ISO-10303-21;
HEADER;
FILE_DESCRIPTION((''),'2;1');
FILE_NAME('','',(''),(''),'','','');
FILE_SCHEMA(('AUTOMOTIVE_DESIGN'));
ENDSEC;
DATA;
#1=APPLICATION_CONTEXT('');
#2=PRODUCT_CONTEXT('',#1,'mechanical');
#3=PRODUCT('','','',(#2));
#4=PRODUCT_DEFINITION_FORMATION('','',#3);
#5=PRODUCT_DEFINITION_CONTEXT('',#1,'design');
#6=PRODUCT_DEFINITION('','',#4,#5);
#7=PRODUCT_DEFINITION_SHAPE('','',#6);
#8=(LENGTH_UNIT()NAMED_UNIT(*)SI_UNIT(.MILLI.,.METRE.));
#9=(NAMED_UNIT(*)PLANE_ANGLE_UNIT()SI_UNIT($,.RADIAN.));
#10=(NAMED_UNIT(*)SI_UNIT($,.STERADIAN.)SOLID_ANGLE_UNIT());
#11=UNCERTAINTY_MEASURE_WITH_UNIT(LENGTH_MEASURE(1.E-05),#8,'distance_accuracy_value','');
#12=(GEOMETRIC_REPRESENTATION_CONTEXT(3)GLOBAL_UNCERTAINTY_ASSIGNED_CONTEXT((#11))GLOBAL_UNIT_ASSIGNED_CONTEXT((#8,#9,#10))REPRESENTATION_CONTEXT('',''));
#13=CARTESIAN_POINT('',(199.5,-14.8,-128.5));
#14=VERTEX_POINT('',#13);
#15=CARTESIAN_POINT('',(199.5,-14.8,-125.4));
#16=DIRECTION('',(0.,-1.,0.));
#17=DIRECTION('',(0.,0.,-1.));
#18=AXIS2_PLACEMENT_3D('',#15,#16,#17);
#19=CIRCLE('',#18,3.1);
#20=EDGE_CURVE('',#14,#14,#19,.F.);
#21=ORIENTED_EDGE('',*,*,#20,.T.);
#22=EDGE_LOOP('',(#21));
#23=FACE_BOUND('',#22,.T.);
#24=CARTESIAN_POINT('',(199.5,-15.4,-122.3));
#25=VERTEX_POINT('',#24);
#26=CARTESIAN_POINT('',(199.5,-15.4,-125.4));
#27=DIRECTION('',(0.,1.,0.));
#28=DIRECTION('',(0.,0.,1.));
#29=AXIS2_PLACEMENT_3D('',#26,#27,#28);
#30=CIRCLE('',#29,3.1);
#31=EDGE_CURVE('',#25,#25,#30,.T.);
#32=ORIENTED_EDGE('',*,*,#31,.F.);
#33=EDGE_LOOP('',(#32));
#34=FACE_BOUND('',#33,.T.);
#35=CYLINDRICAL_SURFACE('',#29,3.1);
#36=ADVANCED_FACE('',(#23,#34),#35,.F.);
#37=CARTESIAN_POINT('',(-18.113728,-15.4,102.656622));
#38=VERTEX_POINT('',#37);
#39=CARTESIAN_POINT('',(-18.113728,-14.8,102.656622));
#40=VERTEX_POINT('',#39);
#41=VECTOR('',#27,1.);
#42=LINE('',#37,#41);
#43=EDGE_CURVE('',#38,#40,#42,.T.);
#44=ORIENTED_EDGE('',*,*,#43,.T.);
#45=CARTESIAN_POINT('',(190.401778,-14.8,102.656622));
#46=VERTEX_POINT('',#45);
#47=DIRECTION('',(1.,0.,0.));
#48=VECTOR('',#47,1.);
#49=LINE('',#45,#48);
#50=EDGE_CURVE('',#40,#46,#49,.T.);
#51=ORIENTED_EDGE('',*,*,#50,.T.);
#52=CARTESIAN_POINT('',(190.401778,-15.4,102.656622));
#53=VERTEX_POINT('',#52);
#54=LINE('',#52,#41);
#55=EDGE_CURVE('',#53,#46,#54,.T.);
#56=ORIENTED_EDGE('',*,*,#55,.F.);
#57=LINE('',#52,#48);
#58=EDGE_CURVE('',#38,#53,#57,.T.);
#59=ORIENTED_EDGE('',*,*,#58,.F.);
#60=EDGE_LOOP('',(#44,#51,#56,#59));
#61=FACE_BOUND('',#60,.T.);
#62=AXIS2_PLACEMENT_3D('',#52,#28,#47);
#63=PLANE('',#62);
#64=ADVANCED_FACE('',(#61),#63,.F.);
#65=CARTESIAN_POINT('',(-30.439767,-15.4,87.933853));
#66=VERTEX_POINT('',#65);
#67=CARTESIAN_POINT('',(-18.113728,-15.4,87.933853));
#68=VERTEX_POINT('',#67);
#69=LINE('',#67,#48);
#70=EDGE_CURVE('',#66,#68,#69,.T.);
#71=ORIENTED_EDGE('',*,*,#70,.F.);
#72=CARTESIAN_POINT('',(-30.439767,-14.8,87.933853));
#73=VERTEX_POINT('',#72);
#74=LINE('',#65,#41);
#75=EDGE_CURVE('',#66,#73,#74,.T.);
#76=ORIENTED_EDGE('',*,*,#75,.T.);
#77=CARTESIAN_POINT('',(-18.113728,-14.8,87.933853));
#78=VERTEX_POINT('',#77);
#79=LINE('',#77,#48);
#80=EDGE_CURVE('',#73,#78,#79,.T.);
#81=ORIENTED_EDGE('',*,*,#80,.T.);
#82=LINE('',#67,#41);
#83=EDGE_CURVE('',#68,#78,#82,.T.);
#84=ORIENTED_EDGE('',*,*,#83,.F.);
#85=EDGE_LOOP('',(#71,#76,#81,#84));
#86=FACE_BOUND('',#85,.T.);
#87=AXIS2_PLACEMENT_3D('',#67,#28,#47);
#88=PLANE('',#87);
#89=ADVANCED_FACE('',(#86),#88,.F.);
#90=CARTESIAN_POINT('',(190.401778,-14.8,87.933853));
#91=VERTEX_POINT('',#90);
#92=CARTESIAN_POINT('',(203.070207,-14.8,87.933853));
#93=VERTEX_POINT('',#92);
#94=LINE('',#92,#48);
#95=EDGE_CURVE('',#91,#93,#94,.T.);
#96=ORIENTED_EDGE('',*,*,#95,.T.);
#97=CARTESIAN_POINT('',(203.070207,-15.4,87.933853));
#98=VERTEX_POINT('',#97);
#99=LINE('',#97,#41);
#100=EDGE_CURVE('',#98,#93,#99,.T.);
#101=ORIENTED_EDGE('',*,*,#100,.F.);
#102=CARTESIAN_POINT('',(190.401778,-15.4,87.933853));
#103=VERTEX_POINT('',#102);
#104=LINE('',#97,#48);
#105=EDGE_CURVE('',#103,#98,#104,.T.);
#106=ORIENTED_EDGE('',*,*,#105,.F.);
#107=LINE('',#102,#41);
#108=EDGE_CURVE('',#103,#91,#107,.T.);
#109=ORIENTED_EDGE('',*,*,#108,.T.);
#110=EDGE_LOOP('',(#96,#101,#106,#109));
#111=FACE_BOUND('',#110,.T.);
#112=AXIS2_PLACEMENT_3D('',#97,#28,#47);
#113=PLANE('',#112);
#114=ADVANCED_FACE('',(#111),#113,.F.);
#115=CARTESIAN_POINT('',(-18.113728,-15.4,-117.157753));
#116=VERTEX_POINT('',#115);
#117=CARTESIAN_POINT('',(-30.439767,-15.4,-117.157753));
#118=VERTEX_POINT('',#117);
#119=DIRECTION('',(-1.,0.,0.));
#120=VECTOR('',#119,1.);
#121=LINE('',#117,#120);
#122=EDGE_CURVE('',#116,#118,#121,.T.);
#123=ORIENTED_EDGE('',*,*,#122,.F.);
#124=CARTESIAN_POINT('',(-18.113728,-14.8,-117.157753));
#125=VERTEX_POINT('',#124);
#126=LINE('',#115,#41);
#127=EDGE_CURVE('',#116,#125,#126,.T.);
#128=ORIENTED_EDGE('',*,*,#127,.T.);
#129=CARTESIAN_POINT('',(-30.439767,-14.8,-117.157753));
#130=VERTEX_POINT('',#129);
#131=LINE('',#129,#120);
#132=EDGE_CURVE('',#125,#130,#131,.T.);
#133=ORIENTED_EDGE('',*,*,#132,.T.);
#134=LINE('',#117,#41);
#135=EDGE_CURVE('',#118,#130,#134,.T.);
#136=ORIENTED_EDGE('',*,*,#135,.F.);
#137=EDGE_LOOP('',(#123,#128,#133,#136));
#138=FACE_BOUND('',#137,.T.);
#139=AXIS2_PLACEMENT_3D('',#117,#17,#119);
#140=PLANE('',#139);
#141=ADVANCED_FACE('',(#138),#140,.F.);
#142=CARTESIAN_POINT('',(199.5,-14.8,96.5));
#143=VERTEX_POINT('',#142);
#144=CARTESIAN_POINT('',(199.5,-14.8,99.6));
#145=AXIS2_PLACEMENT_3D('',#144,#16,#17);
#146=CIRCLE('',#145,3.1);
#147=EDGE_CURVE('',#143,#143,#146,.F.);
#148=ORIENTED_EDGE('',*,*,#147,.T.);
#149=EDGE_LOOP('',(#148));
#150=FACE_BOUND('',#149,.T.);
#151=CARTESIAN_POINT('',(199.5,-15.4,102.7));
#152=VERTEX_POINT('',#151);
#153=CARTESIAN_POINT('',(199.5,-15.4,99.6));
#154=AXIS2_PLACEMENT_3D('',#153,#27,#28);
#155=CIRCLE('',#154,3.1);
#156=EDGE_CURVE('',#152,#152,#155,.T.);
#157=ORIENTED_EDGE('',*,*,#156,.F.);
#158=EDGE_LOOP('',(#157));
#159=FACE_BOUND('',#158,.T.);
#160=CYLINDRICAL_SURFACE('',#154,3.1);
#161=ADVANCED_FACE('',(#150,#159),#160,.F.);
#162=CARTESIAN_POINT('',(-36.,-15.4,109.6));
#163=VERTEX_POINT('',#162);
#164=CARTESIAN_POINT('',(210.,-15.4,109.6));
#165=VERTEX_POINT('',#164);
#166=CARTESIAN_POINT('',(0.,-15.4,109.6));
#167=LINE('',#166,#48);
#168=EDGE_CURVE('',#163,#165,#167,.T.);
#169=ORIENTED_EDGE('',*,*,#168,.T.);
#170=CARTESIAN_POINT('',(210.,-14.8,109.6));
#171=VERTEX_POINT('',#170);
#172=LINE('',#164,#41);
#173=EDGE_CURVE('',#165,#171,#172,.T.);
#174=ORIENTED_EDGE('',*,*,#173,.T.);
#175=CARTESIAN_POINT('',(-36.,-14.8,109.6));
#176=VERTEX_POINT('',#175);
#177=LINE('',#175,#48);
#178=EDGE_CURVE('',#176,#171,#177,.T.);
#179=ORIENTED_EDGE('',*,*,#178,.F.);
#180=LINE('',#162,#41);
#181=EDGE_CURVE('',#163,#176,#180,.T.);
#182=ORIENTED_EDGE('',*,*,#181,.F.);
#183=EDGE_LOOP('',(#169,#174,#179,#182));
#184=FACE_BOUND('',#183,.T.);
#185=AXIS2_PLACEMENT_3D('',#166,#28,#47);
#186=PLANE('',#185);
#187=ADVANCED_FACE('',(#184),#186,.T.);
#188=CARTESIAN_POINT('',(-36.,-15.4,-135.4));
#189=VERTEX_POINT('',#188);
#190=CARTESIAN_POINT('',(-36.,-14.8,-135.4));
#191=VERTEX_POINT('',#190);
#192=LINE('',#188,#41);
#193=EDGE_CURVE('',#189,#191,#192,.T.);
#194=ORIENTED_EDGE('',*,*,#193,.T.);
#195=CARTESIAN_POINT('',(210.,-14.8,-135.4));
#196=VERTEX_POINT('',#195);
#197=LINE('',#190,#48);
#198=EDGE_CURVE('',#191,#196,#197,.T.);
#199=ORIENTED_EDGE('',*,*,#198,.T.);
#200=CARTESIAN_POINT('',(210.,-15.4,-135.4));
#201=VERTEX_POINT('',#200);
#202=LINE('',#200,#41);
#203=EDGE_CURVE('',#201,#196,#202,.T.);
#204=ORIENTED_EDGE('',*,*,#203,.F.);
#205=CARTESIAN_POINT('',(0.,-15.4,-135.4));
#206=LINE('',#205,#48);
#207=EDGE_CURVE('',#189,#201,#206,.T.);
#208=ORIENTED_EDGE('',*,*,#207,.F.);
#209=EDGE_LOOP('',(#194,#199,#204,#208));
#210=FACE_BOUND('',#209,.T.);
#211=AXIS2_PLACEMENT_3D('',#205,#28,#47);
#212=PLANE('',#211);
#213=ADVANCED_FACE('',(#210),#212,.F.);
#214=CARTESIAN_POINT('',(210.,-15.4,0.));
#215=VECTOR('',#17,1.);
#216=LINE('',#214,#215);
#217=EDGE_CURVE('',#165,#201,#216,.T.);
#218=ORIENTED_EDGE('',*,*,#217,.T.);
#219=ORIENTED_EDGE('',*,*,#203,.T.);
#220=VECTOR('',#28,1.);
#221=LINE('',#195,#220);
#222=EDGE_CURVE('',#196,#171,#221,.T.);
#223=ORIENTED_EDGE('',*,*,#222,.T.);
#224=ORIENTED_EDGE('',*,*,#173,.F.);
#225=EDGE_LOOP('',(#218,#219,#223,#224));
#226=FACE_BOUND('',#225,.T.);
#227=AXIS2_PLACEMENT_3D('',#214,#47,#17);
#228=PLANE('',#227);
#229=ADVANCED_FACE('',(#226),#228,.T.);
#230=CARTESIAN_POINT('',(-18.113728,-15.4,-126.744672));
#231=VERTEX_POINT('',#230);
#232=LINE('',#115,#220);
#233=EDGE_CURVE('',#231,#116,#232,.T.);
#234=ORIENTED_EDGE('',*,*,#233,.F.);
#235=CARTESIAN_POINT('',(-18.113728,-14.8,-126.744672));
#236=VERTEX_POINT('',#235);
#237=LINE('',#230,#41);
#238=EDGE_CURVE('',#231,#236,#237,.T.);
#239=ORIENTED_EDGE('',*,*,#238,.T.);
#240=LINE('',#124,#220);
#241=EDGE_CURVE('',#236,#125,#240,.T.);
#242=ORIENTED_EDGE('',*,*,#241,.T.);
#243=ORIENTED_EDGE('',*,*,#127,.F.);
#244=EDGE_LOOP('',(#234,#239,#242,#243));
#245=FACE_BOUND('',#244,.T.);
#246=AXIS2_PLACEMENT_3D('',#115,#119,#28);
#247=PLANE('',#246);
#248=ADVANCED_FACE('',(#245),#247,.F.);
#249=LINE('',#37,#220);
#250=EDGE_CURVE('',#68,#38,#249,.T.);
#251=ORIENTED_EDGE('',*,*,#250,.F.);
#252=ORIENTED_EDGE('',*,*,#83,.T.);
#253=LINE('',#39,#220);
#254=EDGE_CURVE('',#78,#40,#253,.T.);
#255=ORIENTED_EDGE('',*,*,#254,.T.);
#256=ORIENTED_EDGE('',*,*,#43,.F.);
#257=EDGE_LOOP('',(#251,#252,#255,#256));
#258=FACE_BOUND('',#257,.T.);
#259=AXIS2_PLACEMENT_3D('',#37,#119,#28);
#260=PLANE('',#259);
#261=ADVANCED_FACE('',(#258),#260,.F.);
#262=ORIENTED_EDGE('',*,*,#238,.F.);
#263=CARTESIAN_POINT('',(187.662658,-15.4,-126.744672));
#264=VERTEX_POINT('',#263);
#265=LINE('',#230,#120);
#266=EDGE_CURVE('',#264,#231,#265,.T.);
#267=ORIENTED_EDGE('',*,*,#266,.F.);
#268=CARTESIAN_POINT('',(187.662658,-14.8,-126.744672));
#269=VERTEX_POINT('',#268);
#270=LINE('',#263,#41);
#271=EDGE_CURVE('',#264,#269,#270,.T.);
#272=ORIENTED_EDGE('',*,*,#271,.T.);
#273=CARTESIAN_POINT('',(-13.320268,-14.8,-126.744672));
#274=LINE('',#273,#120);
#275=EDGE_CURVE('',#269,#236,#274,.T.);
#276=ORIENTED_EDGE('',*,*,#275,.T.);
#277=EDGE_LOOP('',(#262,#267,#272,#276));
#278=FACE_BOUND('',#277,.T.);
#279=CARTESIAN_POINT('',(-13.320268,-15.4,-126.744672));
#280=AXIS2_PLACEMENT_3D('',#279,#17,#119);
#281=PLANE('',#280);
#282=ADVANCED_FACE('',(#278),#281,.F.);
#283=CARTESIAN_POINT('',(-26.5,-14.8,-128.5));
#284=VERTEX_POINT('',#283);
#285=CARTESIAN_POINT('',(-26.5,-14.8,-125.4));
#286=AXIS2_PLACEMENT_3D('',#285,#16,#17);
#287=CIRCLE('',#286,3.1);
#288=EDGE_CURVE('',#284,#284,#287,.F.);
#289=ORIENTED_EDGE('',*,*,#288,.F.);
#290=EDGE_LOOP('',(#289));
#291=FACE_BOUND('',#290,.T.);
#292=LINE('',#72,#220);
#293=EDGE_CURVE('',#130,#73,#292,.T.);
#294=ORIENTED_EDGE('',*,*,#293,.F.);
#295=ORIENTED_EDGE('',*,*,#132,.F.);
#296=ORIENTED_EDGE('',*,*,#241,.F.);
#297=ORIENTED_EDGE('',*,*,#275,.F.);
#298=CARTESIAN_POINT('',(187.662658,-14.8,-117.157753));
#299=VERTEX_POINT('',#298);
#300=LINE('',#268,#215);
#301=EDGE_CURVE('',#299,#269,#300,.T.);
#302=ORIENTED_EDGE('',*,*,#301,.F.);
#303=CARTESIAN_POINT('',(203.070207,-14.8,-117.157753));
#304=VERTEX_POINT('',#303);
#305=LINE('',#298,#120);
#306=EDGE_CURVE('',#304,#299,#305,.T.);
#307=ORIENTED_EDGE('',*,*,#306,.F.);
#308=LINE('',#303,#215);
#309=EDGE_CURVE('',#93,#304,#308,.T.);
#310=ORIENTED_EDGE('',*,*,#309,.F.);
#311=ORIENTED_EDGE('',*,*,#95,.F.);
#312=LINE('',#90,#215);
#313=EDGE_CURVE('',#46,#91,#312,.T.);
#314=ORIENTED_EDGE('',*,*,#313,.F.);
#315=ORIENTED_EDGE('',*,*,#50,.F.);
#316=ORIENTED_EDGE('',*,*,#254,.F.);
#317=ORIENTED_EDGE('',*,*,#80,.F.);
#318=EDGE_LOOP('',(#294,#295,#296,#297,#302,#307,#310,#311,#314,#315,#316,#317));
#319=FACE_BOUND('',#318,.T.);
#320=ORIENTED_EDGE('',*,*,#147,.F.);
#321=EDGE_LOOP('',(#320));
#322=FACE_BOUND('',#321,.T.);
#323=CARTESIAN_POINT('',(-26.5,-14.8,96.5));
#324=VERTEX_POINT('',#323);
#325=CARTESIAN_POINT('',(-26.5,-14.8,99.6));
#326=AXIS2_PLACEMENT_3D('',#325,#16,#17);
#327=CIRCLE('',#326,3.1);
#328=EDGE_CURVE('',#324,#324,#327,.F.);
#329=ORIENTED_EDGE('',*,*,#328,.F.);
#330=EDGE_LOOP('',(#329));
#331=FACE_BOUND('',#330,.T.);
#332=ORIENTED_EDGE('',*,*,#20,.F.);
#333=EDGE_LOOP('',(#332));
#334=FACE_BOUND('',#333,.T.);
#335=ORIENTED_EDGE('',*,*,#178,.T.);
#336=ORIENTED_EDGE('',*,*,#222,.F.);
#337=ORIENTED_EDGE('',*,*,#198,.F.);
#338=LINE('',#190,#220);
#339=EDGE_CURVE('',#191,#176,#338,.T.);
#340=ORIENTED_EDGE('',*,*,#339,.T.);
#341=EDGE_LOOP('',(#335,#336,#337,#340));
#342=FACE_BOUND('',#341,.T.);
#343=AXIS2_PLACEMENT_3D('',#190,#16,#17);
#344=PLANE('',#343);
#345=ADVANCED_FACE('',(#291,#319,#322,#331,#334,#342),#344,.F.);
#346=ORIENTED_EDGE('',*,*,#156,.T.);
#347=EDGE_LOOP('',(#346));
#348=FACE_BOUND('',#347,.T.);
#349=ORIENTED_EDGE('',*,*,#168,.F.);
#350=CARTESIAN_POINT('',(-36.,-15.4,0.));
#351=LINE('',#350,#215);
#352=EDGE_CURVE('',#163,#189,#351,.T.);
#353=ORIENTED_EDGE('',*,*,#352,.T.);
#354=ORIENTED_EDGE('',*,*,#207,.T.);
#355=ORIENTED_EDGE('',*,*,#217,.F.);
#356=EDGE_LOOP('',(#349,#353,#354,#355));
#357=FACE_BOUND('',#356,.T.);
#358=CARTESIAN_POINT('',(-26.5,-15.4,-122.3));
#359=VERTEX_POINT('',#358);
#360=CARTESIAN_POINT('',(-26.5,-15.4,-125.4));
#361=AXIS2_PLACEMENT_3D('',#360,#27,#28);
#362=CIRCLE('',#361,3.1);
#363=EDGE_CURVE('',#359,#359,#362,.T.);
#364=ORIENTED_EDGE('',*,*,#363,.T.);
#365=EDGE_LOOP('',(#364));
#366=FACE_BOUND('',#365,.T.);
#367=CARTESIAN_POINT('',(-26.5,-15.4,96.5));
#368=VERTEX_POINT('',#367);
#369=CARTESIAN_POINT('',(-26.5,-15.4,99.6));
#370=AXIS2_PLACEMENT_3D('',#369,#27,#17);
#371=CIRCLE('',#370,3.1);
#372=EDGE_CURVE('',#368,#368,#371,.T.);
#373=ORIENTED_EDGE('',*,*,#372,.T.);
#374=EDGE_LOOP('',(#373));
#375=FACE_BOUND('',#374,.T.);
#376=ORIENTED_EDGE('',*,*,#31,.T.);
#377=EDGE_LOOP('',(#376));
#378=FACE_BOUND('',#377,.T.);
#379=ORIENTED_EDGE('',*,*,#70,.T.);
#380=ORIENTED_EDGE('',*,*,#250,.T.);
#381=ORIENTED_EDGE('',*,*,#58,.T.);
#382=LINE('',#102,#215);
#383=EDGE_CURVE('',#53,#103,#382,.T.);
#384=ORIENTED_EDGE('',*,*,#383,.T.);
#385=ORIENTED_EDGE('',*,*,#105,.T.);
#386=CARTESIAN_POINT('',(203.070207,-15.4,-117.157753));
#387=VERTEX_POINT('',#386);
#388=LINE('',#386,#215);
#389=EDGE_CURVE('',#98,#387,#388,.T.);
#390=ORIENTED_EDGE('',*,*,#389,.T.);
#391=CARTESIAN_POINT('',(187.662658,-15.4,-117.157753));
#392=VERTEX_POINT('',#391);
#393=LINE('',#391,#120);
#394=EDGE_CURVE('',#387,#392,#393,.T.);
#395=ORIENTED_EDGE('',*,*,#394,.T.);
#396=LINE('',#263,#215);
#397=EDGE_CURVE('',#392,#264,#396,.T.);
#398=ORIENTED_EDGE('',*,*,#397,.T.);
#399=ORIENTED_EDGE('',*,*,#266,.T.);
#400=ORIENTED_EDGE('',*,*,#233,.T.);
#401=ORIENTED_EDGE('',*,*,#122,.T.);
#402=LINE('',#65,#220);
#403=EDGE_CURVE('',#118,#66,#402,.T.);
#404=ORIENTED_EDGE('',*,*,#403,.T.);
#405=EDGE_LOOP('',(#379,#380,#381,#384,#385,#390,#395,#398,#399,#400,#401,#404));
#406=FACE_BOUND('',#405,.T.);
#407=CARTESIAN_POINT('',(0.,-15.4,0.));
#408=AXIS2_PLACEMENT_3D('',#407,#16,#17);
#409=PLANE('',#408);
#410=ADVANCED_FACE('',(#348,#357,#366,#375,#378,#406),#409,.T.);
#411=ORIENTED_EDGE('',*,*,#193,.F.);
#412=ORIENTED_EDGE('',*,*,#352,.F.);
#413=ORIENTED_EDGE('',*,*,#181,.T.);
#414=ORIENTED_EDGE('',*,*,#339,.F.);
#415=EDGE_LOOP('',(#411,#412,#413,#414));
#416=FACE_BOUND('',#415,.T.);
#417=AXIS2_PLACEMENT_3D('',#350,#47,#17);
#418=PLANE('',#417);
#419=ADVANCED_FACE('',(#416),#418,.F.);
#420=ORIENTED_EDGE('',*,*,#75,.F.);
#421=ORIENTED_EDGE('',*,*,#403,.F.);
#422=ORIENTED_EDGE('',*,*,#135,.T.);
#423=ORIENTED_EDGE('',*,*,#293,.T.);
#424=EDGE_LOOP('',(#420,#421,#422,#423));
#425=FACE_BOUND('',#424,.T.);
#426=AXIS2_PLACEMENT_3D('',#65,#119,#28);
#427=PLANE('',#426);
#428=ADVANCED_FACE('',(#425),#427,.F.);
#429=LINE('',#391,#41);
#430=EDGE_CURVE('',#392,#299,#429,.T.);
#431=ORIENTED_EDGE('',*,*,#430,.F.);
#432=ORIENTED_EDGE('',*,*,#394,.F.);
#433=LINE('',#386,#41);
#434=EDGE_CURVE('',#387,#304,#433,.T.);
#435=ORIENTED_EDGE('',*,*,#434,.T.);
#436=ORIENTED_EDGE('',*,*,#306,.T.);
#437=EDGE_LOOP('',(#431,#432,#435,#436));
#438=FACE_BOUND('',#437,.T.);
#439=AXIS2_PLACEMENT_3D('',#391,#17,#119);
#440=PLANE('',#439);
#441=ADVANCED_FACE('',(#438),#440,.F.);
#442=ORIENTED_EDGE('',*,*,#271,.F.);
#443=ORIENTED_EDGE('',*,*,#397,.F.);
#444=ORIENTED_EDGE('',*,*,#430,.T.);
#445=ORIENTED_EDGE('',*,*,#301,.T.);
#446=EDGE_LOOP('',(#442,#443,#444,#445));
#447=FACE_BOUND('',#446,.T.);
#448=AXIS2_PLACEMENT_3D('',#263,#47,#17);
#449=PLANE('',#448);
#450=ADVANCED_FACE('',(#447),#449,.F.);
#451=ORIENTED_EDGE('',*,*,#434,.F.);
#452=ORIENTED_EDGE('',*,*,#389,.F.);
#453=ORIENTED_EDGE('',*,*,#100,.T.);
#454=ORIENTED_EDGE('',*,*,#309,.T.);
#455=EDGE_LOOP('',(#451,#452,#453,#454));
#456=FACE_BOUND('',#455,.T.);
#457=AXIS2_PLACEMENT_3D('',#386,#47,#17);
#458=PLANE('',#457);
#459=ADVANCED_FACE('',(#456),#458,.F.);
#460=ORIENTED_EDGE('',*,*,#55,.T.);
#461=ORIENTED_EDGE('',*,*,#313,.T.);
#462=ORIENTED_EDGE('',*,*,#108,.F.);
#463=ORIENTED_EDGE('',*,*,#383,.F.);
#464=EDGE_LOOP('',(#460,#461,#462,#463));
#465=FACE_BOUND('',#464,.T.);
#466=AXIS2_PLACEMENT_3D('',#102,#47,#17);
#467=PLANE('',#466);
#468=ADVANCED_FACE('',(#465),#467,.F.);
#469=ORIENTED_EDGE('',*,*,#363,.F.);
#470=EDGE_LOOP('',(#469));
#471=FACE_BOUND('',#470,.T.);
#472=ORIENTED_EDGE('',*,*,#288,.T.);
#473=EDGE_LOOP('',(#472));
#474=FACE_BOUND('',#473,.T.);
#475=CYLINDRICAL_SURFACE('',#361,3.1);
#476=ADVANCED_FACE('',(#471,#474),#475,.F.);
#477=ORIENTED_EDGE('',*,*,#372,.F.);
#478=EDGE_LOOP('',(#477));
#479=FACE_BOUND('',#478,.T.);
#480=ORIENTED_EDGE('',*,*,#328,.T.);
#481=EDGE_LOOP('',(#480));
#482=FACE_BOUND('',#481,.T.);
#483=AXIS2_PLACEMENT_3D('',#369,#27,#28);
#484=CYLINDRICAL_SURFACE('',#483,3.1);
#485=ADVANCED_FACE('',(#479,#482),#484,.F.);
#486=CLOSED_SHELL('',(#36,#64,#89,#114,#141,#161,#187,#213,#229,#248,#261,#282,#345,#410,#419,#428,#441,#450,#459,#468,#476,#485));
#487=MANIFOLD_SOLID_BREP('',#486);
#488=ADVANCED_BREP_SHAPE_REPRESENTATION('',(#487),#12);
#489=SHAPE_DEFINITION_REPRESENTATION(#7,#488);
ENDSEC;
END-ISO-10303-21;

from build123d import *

# Parameters (mm, degrees)
BOSS_EXTRUDE1_DEPTH   = 5.5
BOSS_EXTRUDE1_2_DEPTH = 5.5
SKETCH2_W             = 112.4
SKETCH2_H             = 112.4
BOSS_EXTRUDE2_DEPTH   = 9.4
BOSS_EXTRUDE3_START   = 9.4
SKETCH2_3_W           = 246
SKETCH2_3_H           = 245
BOSS_EXTRUDE3_DEPTH   = 6
SKETCH3_R             = 3.1
CUT_EXTRUDE1_DEPTH    = 251.310147617
BOSS_EXTRUDE4_DEPTH   = 15
SKETCH5_W             = 16
SKETCH5_H             = 22.5
BOSS_EXTRUDE5_DEPTH   = 3.9
SKETCH6_W             = 16
SKETCH6_H             = 20.5
CUT_EXTRUDE2_DEPTH    = 3.4
CHAMFER1_SIZE         = 2
CHAMFER2_SIZE         = 3.05
CHAMFER3_SIZE         = 3
CHAMFER4_SIZE         = 3
SKETCH8_W             = 79.1
SKETCH8_H             = 5
CUT_EXTRUDE3_DEPTH    = 0.1
SKETCH9_W             = 246
SKETCH9_H             = 27.9
CUT_EXTRUDE4_DEPTH    = 324.051327191
CUT_EXTRUDE5_DEPTH    = 250.867004624


with BuildPart() as part:
    # Sketch1 → Boss-Extrude1 (new body)
    with BuildSketch(Plane(origin=(0, 0, 0), x_dir=(1, 0, 0), z_dir=(0, 1, 0))):
        Polygon((-6, -6), (-6, 106.4), (7.7, 106.4), (7.7, 100.4), (0, 100.4), (0, 0), (100.4, 0), (100.4, 40.9), (106.4, 40.9), (106.4, -6), align=None)
    extrude(amount=BOSS_EXTRUDE1_DEPTH)



with BuildPart() as body_2:
    # Sketch1 → Boss-Extrude1 2 (new body)
    with BuildSketch(Plane(origin=(0, 0, 0), x_dir=(1, 0, 0), z_dir=(0, 1, 0))):
        Polygon((92.7, 100.4), (92.7, 106.4), (106.4, 106.4), (106.4, 59.5), (100.4, 59.5), (100.4, 100.4), align=None)
    extrude(amount=BOSS_EXTRUDE1_2_DEPTH)


with BuildPart() as part_1:
    add(part.part)

    add(body_2.part)  # Boss-Extrude2 merges body 2
    # Sketch2 → Boss-Extrude2 (add)
    with BuildSketch(Plane.XZ):
        with Locations((50.2, -50.2)):
            Rectangle(SKETCH2_W, SKETCH2_H)
    extrude(amount=BOSS_EXTRUDE2_DEPTH)

    # Sketch2<3> → Boss-Extrude3 (add)
    with BuildSketch(Plane.XZ.offset(BOSS_EXTRUDE3_START)):
        with Locations((87, -12.9)):
            Rectangle(SKETCH2_3_W, SKETCH2_3_H)
    extrude(amount=BOSS_EXTRUDE3_DEPTH)

    # Sketch3 → Cut-Extrude1 (cut, through all)
    with BuildSketch(Plane(origin=(0, -9.4, 0), x_dir=(1, 0, 0), z_dir=(0, 1, 0))):
        with Locations(Location((-26.5, 125.4, 0), (0, 0, 270))):
            Circle(SKETCH3_R)
        with Locations(Location((-26.5, -99.6, 0), (0, 0, 90))):
            Circle(SKETCH3_R)
        with Locations(Location((199.5, 125.4, 0), (0, 0, 270))):
            Circle(SKETCH3_R)
        with Locations(Location((199.5, -99.6, 0), (0, 0, 270))):
            Circle(SKETCH3_R)
    extrude(amount=-CUT_EXTRUDE1_DEPTH, mode=Mode.SUBTRACT)

    # Sketch4 → Boss-Extrude4 (add)
    with BuildSketch(Plane(origin=(0, -9.4, 0), x_dir=(1, 0, 0), z_dir=(0, 1, 0))):
        with BuildLine():
            Line((-16, -109.6), (49, -109.6))
            Line((49, -109.6), (49, -6))
            Line((49, -6), (-36, -6))
            Line((-36, -6), (-36, -89.6))
            Line((-36, -89.6), (-22, -89.6))
            ThreePointArc((-22, -89.6), (-17.757359313, -91.357359313), (-16, -95.6))
            Line((-16, -95.6), (-16, -109.6))
        make_face()
    extrude(amount=BOSS_EXTRUDE4_DEPTH)

    # Sketch5 → Boss-Extrude5 (add)
    with BuildSketch(Plane(origin=(0, 0, -106.4), x_dir=(-1, 0, 0), z_dir=(0, 0, -1))):
        with Locations((-99.9, 1.85)):
            Rectangle(SKETCH5_W, SKETCH5_H)
        with Locations((-0.5, 1.85)):
            Rectangle(SKETCH5_W, SKETCH5_H)
    extrude(amount=BOSS_EXTRUDE5_DEPTH)

    # Sketch6 → Cut-Extrude2 (cut)
    with BuildSketch(Plane(origin=(0, 0, -110.3), x_dir=(-1, 0, 0), z_dir=(0, 0, -1))):
        with Locations((-0.5, 0.85)):
            Rectangle(SKETCH6_W, SKETCH6_H)
        with Locations((-99.9, 0.85)):
            Rectangle(SKETCH6_W, SKETCH6_H)
    extrude(amount=-CUT_EXTRUDE2_DEPTH, mode=Mode.SUBTRACT)

    # Chamfer1
    # the kernel refuses this chamfer: 2 mm, written as the material it adds along each edge
    with BuildSketch(Plane(origin=(92.7, -5.143365976, -106.4), x_dir=(-0.9996219169112968, 0, -0.027495876610589005), z_dir=(0, 1, 0))) as chamfer1_piece_1_section:
        Polygon((CHAMFER1_SIZE * 0.999621916911, CHAMFER1_SIZE * 0.0274958766106), (-CHAMFER1_SIZE * 0.0274958766106, CHAMFER1_SIZE * 0.999621916911), (0, 0), align=None)
    chamfer1_piece_1 = extrude(amount=10.643365976, mode=Mode.PRIVATE)
    chamfer1_piece_1 = split(chamfer1_piece_1, bisect_by=Plane(origin=(91.9, -2.571682988, -105.57221902), z_dir=(1, 0, 0)), keep=Keep.TOP, mode=Mode.PRIVATE)
    add(chamfer1_piece_1)
    with BuildSketch(Plane(origin=(92.7, 5.5, -106.4), x_dir=(0, 0.9996219169112968, -0.027495876610589075), z_dir=(1, 0, 0)), Plane(origin=(-6, 5.5, -106.4), x_dir=(0, 0.9996219169112968, -0.027495876610589075), z_dir=(1, 0, 0))) as chamfer1_piece_2:
        Polygon((CHAMFER1_SIZE * 0.999621916911, CHAMFER1_SIZE * 0.0274958766106), (-CHAMFER1_SIZE * 0.0274958766106, CHAMFER1_SIZE * 0.999621916911), (0, 0), align=None)
    extrude(amount=13.7)
    with BuildSketch(Plane(origin=(106.4, 5.5, -106.4), x_dir=(-0.027495876610589005, 0, 0.9996219169112968), z_dir=(0, -1, 0))) as chamfer1_piece_3_section:
        Polygon((CHAMFER1_SIZE * 0.999621916911, -CHAMFER1_SIZE * 0.0274958766106), (-CHAMFER1_SIZE * 0.0274958766106, -CHAMFER1_SIZE * 0.999621916911), (0, 0), align=None)
    chamfer1_piece_3 = extrude(amount=14.9, mode=Mode.PRIVATE)
    chamfer1_piece_3 = split(chamfer1_piece_3, bisect_by=Plane(origin=(107.9, -1.95, -105.69608178), z_dir=(-1, 0, 0)), keep=Keep.TOP, mode=Mode.PRIVATE)
    add(chamfer1_piece_3)
    with BuildSketch(Plane(origin=(106.4, 5.5, -106.4), x_dir=(-0.027495876610589005, 0, 0.9996219169112968), z_dir=(0, -1, 0))) as chamfer1_piece_4_section:
        Polygon((CHAMFER1_SIZE * 0.999621916911, -CHAMFER1_SIZE * 0.0274958766106), (-CHAMFER1_SIZE * 0.0274958766106, -CHAMFER1_SIZE * 0.999621916911), (0, 0), align=None)
    chamfer1_piece_4 = extrude(amount=20.043365976, mode=Mode.PRIVATE)
    chamfer1_piece_4 = split(chamfer1_piece_4, bisect_by=Plane(origin=(106.974972825, -9.4, -105.69608178), z_dir=(0, -1, 0)), keep=Keep.TOP, mode=Mode.PRIVATE)
    chamfer1_piece_4 = split(chamfer1_piece_4, bisect_by=Plane(origin=(107.9, -11.971682988, -105.69608178), z_dir=(-1, 0, 0)), keep=Keep.TOP, mode=Mode.PRIVATE)
    add(chamfer1_piece_4)
    with BuildSketch(Plane(origin=(106.4, 5.5, -106.4), x_dir=(-0.027495876610589005, 0, 0.9996219169112968), z_dir=(0, -1, 0))) as chamfer1_piece_5_section:
        Polygon((CHAMFER1_SIZE * 0.999621916911, -CHAMFER1_SIZE * 0.0274958766106), (-CHAMFER1_SIZE * 0.0274958766106, -CHAMFER1_SIZE * 0.999621916911), (0, 0), align=None)
    chamfer1_piece_5 = extrude(amount=20.043365976, mode=Mode.PRIVATE)
    chamfer1_piece_5 = split(chamfer1_piece_5, bisect_by=Plane(origin=(108.09753906, -9.4, -106.284213701), z_dir=(0, -1, 0)), keep=Keep.TOP, mode=Mode.PRIVATE)
    chamfer1_piece_5 = split(chamfer1_piece_5, bisect_by=Plane(origin=(107.9, -11.971682988, -106.284213701), z_dir=(1, 0, 0)), keep=Keep.TOP, mode=Mode.PRIVATE)
    add(chamfer1_piece_5)
    with BuildSketch(Plane(origin=(7.7, -5.143365976, -106.4), x_dir=(0.9996219169112965, 0, -0.027495876610589057), z_dir=(0, 1, 0))) as chamfer1_piece_6_section:
        Polygon((CHAMFER1_SIZE * 0.999621916911, -CHAMFER1_SIZE * 0.0274958766106), (-CHAMFER1_SIZE * 0.0274958766106, -CHAMFER1_SIZE * 0.999621916911), (0, 0), align=None)
    chamfer1_piece_6 = extrude(amount=10.643365976, mode=Mode.PRIVATE)
    chamfer1_piece_6 = split(chamfer1_piece_6, bisect_by=Plane(origin=(8.5, -2.571682988, -105.57221902), z_dir=(-1, 0, 0)), keep=Keep.TOP, mode=Mode.PRIVATE)
    add(chamfer1_piece_6)
    with BuildSketch(Plane(origin=(-6, 5.5, -106.4), x_dir=(-0.9996219169112968, 0, -0.027495876610589075), z_dir=(0, -1, 0))) as chamfer1_piece_7_section:
        Polygon((CHAMFER1_SIZE * 0.999621916911, -CHAMFER1_SIZE * 0.0274958766106), (-CHAMFER1_SIZE * 0.0274958766106, -CHAMFER1_SIZE * 0.999621916911), (0, 0), align=None)
    chamfer1_piece_7 = extrude(amount=14.9, mode=Mode.PRIVATE)
    chamfer1_piece_7 = split(chamfer1_piece_7, bisect_by=Plane(origin=(-7.5, -1.95, -105.69608178), z_dir=(1, 0, 0)), keep=Keep.TOP, mode=Mode.PRIVATE)
    add(chamfer1_piece_7)
    with BuildSketch(Plane(origin=(-6, 5.5, -106.4), x_dir=(-0.9996219169112968, 0, -0.027495876610589075), z_dir=(0, -1, 0))) as chamfer1_piece_8_section:
        Polygon((CHAMFER1_SIZE * 0.999621916911, -CHAMFER1_SIZE * 0.0274958766106), (-CHAMFER1_SIZE * 0.0274958766106, -CHAMFER1_SIZE * 0.999621916911), (0, 0), align=None)
    chamfer1_piece_8 = extrude(amount=20.043365976, mode=Mode.PRIVATE)
    chamfer1_piece_8 = split(chamfer1_piece_8, bisect_by=Plane(origin=(-7.69753906, -9.4, -106.284213701), z_dir=(0, -1, 0)), keep=Keep.TOP, mode=Mode.PRIVATE)
    chamfer1_piece_8 = split(chamfer1_piece_8, bisect_by=Plane(origin=(-7.5, -11.971682988, -106.284213701), z_dir=(-1, 0, 0)), keep=Keep.TOP, mode=Mode.PRIVATE)
    add(chamfer1_piece_8)
    with BuildSketch(Plane(origin=(-6, 5.5, -106.4), x_dir=(-0.9996219169112968, 0, -0.027495876610589075), z_dir=(0, -1, 0))) as chamfer1_piece_9_section:
        Polygon((CHAMFER1_SIZE * 0.999621916911, -CHAMFER1_SIZE * 0.0274958766106), (-CHAMFER1_SIZE * 0.0274958766106, -CHAMFER1_SIZE * 0.999621916911), (0, 0), align=None)
    chamfer1_piece_9 = extrude(amount=20.043365976, mode=Mode.PRIVATE)
    chamfer1_piece_9 = split(chamfer1_piece_9, bisect_by=Plane(origin=(-6.574972825, -9.4, -105.69608178), z_dir=(0, -1, 0)), keep=Keep.TOP, mode=Mode.PRIVATE)
    chamfer1_piece_9 = split(chamfer1_piece_9, bisect_by=Plane(origin=(-7.5, -11.971682988, -105.69608178), z_dir=(1, 0, 0)), keep=Keep.TOP, mode=Mode.PRIVATE)
    add(chamfer1_piece_9)
    with BuildSketch(Plane(origin=(87.556634024, 5.5, -106.4), x_dir=(0, 0.9996219169112968, -0.027495876610589075), z_dir=(1, 0, 0))) as chamfer1_piece_10a_section:
        Polygon((CHAMFER1_SIZE * 0.999621916911, CHAMFER1_SIZE * 0.0274958766106), (-CHAMFER1_SIZE * 0.0274958766106, CHAMFER1_SIZE * 0.999621916911), (0, 0), align=None)
    chamfer1_piece_10a = extrude(amount=18.843365976, mode=Mode.PRIVATE)
    chamfer1_piece_10a = split(chamfer1_piece_10a, bisect_by=Plane(origin=(91.9, 6.159587254, -105.740412746), z_dir=(1, 0, 0)), keep=Keep.TOP, mode=Mode.PRIVATE)
    chamfer1_piece_10a = split(chamfer1_piece_10a, bisect_by=Plane(origin=(92.7, 6.159587254, -105.740412746), z_dir=(-1, 0, 0)), keep=Keep.TOP, mode=Mode.PRIVATE)
    with BuildSketch(Plane(origin=(92.7, 0, -106.4), x_dir=(-0.9996219169112968, 0, -0.027495876610589005), z_dir=(0, 1, 0))) as chamfer1_piece_10b_section:
        Polygon((CHAMFER1_SIZE * 0.999621916911, CHAMFER1_SIZE * 0.0274958766106), (-CHAMFER1_SIZE * 0.0274958766106, CHAMFER1_SIZE * 0.999621916911), (0, 0), align=None)
    chamfer1_piece_10b = extrude(amount=10.643365976, mode=Mode.PRIVATE)
    chamfer1_piece_10b = split(chamfer1_piece_10b, bisect_by=Plane(origin=(91.9, 8.071682988, -105.57221902), z_dir=(1, 0, 0)), keep=Keep.TOP, mode=Mode.PRIVATE)
    chamfer1_piece_10b = split(chamfer1_piece_10b, bisect_by=Plane(origin=(92.36112716, 5.5, -105.57221902), z_dir=(0, 1, 0)), keep=Keep.TOP, mode=Mode.PRIVATE)
    chamfer1_piece_10 = chamfer1_piece_10a & chamfer1_piece_10b
    add(chamfer1_piece_10)
    with BuildSketch(Plane(origin=(106.4, 10.643365976, -106.4), x_dir=(-0.027495876610589005, 0, 0.9996219169112968), z_dir=(0, -1, 0))) as chamfer1_piece_11a_section:
        Polygon((CHAMFER1_SIZE * 0.999621916911, -CHAMFER1_SIZE * 0.0274958766106), (-CHAMFER1_SIZE * 0.0274958766106, -CHAMFER1_SIZE * 0.999621916911), (0, 0), align=None)
    chamfer1_piece_11a = extrude(amount=20.043365976, mode=Mode.PRIVATE)
    chamfer1_piece_11a = split(chamfer1_piece_11a, bisect_by=Plane(origin=(106.974972825, 5.5, -105.69608178), z_dir=(0, 1, 0)), keep=Keep.TOP, mode=Mode.PRIVATE)
    chamfer1_piece_11a = split(chamfer1_piece_11a, bisect_by=Plane(origin=(107.9, 8.071682988, -105.69608178), z_dir=(-1, 0, 0)), keep=Keep.TOP, mode=Mode.PRIVATE)
    with BuildSketch(Plane(origin=(92.7, 5.5, -106.4), x_dir=(0, 0.9996219169112968, -0.027495876610589075), z_dir=(1, 0, 0))) as chamfer1_piece_11b_section:
        Polygon((CHAMFER1_SIZE * 0.999621916911, CHAMFER1_SIZE * 0.0274958766106), (-CHAMFER1_SIZE * 0.0274958766106, CHAMFER1_SIZE * 0.999621916911), (0, 0), align=None)
    chamfer1_piece_11b = extrude(amount=18.843365976, mode=Mode.PRIVATE)
    chamfer1_piece_11b = split(chamfer1_piece_11b, bisect_by=Plane(origin=(106.4, 6.159587254, -105.740412746), z_dir=(1, 0, 0)), keep=Keep.TOP, mode=Mode.PRIVATE)
    chamfer1_piece_11b = split(chamfer1_piece_11b, bisect_by=Plane(origin=(107.9, 6.159587254, -105.740412746), z_dir=(-1, 0, 0)), keep=Keep.TOP, mode=Mode.PRIVATE)
    chamfer1_piece_11 = chamfer1_piece_11a & chamfer1_piece_11b
    add(chamfer1_piece_11)
    with BuildSketch(Plane(origin=(-6, 5.5, -106.4), x_dir=(0, 0.9996219169112968, -0.027495876610589075), z_dir=(1, 0, 0))) as chamfer1_piece_12a_section:
        Polygon((CHAMFER1_SIZE * 0.999621916911, CHAMFER1_SIZE * 0.0274958766106), (-CHAMFER1_SIZE * 0.0274958766106, CHAMFER1_SIZE * 0.999621916911), (0, 0), align=None)
    chamfer1_piece_12a = extrude(amount=18.843365976, mode=Mode.PRIVATE)
    chamfer1_piece_12a = split(chamfer1_piece_12a, bisect_by=Plane(origin=(8.5, 6.159587254, -105.740412746), z_dir=(-1, 0, 0)), keep=Keep.TOP, mode=Mode.PRIVATE)
    chamfer1_piece_12a = split(chamfer1_piece_12a, bisect_by=Plane(origin=(7.7, 6.159587254, -105.740412746), z_dir=(1, 0, 0)), keep=Keep.TOP, mode=Mode.PRIVATE)
    with BuildSketch(Plane(origin=(7.7, 0, -106.4), x_dir=(0.9996219169112965, 0, -0.027495876610589057), z_dir=(0, 1, 0))) as chamfer1_piece_12b_section:
        Polygon((CHAMFER1_SIZE * 0.999621916911, -CHAMFER1_SIZE * 0.0274958766106), (-CHAMFER1_SIZE * 0.0274958766106, -CHAMFER1_SIZE * 0.999621916911), (0, 0), align=None)
    chamfer1_piece_12b = extrude(amount=10.643365976, mode=Mode.PRIVATE)
    chamfer1_piece_12b = split(chamfer1_piece_12b, bisect_by=Plane(origin=(8.5, 8.071682988, -105.57221902), z_dir=(-1, 0, 0)), keep=Keep.TOP, mode=Mode.PRIVATE)
    chamfer1_piece_12b = split(chamfer1_piece_12b, bisect_by=Plane(origin=(8.03887284, 5.5, -105.57221902), z_dir=(0, 1, 0)), keep=Keep.TOP, mode=Mode.PRIVATE)
    chamfer1_piece_12 = chamfer1_piece_12a & chamfer1_piece_12b
    add(chamfer1_piece_12)
    with BuildSketch(Plane(origin=(-6, 10.643365976, -106.4), x_dir=(-0.9996219169112968, 0, -0.027495876610589075), z_dir=(0, -1, 0))) as chamfer1_piece_13a_section:
        Polygon((CHAMFER1_SIZE * 0.999621916911, -CHAMFER1_SIZE * 0.0274958766106), (-CHAMFER1_SIZE * 0.0274958766106, -CHAMFER1_SIZE * 0.999621916911), (0, 0), align=None)
    chamfer1_piece_13a = extrude(amount=20.043365976, mode=Mode.PRIVATE)
    chamfer1_piece_13a = split(chamfer1_piece_13a, bisect_by=Plane(origin=(-7.5, 8.071682988, -105.69608178), z_dir=(1, 0, 0)), keep=Keep.TOP, mode=Mode.PRIVATE)
    chamfer1_piece_13a = split(chamfer1_piece_13a, bisect_by=Plane(origin=(-6.574972825, 5.5, -105.69608178), z_dir=(0, 1, 0)), keep=Keep.TOP, mode=Mode.PRIVATE)
    with BuildSketch(Plane(origin=(-11.143365976, 5.5, -106.4), x_dir=(0, 0.9996219169112968, -0.027495876610589075), z_dir=(1, 0, 0))) as chamfer1_piece_13b_section:
        Polygon((CHAMFER1_SIZE * 0.999621916911, CHAMFER1_SIZE * 0.0274958766106), (-CHAMFER1_SIZE * 0.0274958766106, CHAMFER1_SIZE * 0.999621916911), (0, 0), align=None)
    chamfer1_piece_13b = extrude(amount=18.843365976, mode=Mode.PRIVATE)
    chamfer1_piece_13b = split(chamfer1_piece_13b, bisect_by=Plane(origin=(-7.5, 6.159587254, -105.740412746), z_dir=(1, 0, 0)), keep=Keep.TOP, mode=Mode.PRIVATE)
    chamfer1_piece_13b = split(chamfer1_piece_13b, bisect_by=Plane(origin=(-6, 6.159587254, -105.740412746), z_dir=(-1, 0, 0)), keep=Keep.TOP, mode=Mode.PRIVATE)
    chamfer1_piece_13 = chamfer1_piece_13a & chamfer1_piece_13b
    add(chamfer1_piece_13)
    # the kernel refuses this chamfer: 2 mm, written as the material it takes off along each edge
    with BuildSketch(Plane(origin=(113.043365976, 13.1, -106.4), x_dir=(1.4427442484973125e-15, -0.9996219169112968, 0.027495876610589075), z_dir=(-1, 0, 0)), Plane(origin=(-12.643365976, 13.1, -106.4), x_dir=(0, 0.027495876610586414, -0.9996219169112968), z_dir=(1, 0, 0))) as chamfer1_2_piece_1:
        Polygon((CHAMFER1_SIZE * 0.999621916911, -CHAMFER1_SIZE * 0.0274958766106), (-CHAMFER1_SIZE * 0.0274958766106, -CHAMFER1_SIZE * 0.999621916911), (0, 0), align=None)
    extrude(amount=26.286731952, mode=Mode.SUBTRACT)

    # Chamfer2
    chamfer2_edges = [part_1.edges().sort_by_distance(p)[0] for p in [
        (199.5, -9.4, -128.5),
        (-26.5, -9.4, -128.5),
        (-26.5, -9.4, 102.7),
        (199.5, -9.4, 96.5),
    ]]
    chamfer(chamfer2_edges, length=CHAMFER2_SIZE)

    # Chamfer3
    chamfer3_edges = [part_1.edges().sort_by_distance(p)[0] for p in [
        (106.4, 5.5, -17.45),
    ]]
    chamfer(chamfer3_edges, length=CHAMFER3_SIZE)
    chamfer3_2_edges = [part_1.edges().sort_by_distance(p)[0] for p in [
        (106.4, 5.5, -81.95),
    ]]
    chamfer(chamfer3_2_edges, length=CHAMFER3_SIZE)
    chamfer3_3_edges = [part_1.edges().sort_by_distance(p)[0] for p in [
        (76.2, 5.5, 6),
    ]]
    chamfer(chamfer3_3_edges, length=CHAMFER3_SIZE)
    chamfer3_4_edges = [part_1.edges().sort_by_distance(p)[0] for p in [
        (49, 5.6, 57.8),
    ]]
    chamfer(chamfer3_4_edges, length=CHAMFER3_SIZE)
    chamfer3_5_edges = [part_1.edges().sort_by_distance(p)[0] for p in [
        (15, 5.6, 109.6),
    ]]
    chamfer(chamfer3_5_edges, length=CHAMFER3_SIZE)
    chamfer3_6_edges = [part_1.edges().sort_by_distance(p)[0] for p in [
        (-36, 5.6, 47.8),
    ]]
    chamfer(chamfer3_6_edges, length=CHAMFER3_SIZE)
    chamfer3_7_edges = [part_1.edges().sort_by_distance(p)[0] for p in [
        (-6, 5.5, -49.2),
    ]]
    chamfer(chamfer3_7_edges, length=CHAMFER3_SIZE)
    chamfer3_8_edges = [part_1.edges().sort_by_distance(p)[0] for p in [
        (-16, 5.6, 101.1),
        (-27.5, 5.6, 89.6),
        (-17.757359313, 5.6, 91.357359313),
    ]]
    chamfer(chamfer3_8_edges, length=CHAMFER3_SIZE)

    # Chamfer4
    chamfer4_edges = [part_1.edges().sort_by_distance(p)[0] for p in [
        (-36, -9.4, -64.7),
        (129.5, -9.4, 109.6),
        (-36, -3.4, 89.6),
        (-36, -3.4, 6),
        (-16, -3.4, 109.6),
        (49, -3.4, 109.6),
        (-36, -9.4, 99.6),
        (87, -9.4, -135.4),
        (-26, -9.4, 109.6),
        (210, -9.4, -12.9),
    ]]
    chamfer(chamfer4_edges, length=CHAMFER4_SIZE)

    # Sketch8 → Cut-Extrude3 (cut)
    with BuildSketch(Plane(origin=(0, 5.6, 0), x_dir=(1, 0, 0), z_dir=(0, 1, 0))):
        with Locations((6.55, -8.5)):
            Rectangle(SKETCH8_W, SKETCH8_H)
    extrude(amount=-CUT_EXTRUDE3_DEPTH, mode=Mode.SUBTRACT)

    # Chamfer5
    # the kernel refuses this chamfer: 3 mm, written as the material it takes off along each edge
    with BuildSketch(Plane(origin=(6.229157809, 5.5, 6), x_dir=(0, -0.9850292351397439, -0.17238737169529297), z_dir=(-1, 0, 0))) as chamfer5_piece_1_section:
        with BuildLine():
            Line((3.691663124, 0), (-1.253737533, 3.472249821))
            Line((-1.253737533, 3.472249821), (-1.697000689, 3.394675503))
            ThreePointArc((-1.697000689, 3.394675503), (-0.756697539, 1.713403919), (-0.443263156, -0.077574317))
            Line((-0.443263156, -0.077574317), (0.077574317, -0.443263156))
            ThreePointArc((0.077574317, -0.443263156), (1.868552553, -0.129828772), (3.769237441, -0.443263156))
            Line((3.769237441, -0.443263156), (3.691663124, 0))
        make_face()
    chamfer5_piece_1 = extrude(amount=39.229157809, mode=Mode.PRIVATE)
    chamfer5_piece_1 = split(chamfer5_piece_1, bisect_by=Plane(origin=(-4.039459416, 4.460540584, 7.280331392), z_dir=(-0.7071067811865476, 0.7071067811865476, 0)), keep=Keep.TOP, mode=Mode.PRIVATE)
    chamfer5_piece_1 = split(chamfer5_piece_1, bisect_by=Plane(origin=(-6, 5.114054112, 7.280331392), z_dir=(1, 0, 0)), keep=Keep.TOP, mode=Mode.PRIVATE)
    add(chamfer5_piece_1, mode=Mode.SUBTRACT)
    with BuildSketch(Plane(origin=(6.229157809, 5.5, 6), x_dir=(0, -0.9850292351397439, -0.17238737169529297), z_dir=(-1, 0, 0))) as chamfer5_piece_2_section:
        with BuildLine():
            Line((3.691663124, 0), (-1.253737533, 3.472249821))
            Line((-1.253737533, 3.472249821), (-1.697000689, 3.394675503))
            ThreePointArc((-1.697000689, 3.394675503), (-0.756697539, 1.713403919), (-0.443263156, -0.077574317))
            Line((-0.443263156, -0.077574317), (0.077574317, -0.443263156))
            ThreePointArc((0.077574317, -0.443263156), (1.868552553, -0.129828772), (3.769237441, -0.443263156))
            Line((3.769237441, -0.443263156), (3.691663124, 0))
        make_face()
    chamfer5_piece_2 = extrude(amount=39.229157809, mode=Mode.PRIVATE)
    chamfer5_piece_2 = split(chamfer5_piece_2, bisect_by=Plane(origin=(-6.302738925, 2.197261075, 5.315019574), z_dir=(0.7071067811865476, -0.7071067811865476, 0)), keep=Keep.TOP, mode=Mode.PRIVATE)
    chamfer5_piece_2 = split(chamfer5_piece_2, bisect_by=Plane(origin=(-6, 2.0963481, 5.315019574), z_dir=(-1, 0, 0)), keep=Keep.TOP, mode=Mode.PRIVATE)
    add(chamfer5_piece_2, mode=Mode.SUBTRACT)
    with BuildSketch(Plane(origin=(6.229157809, 5.5, 6), x_dir=(0, -0.9850292351397439, -0.17238737169529297), z_dir=(-1, 0, 0))) as chamfer5_piece_3_section:
        with BuildLine():
            Line((3.691663124, 0), (-1.253737533, 3.472249821))
            Line((-1.253737533, 3.472249821), (-1.697000689, 3.394675503))
            ThreePointArc((-1.697000689, 3.394675503), (-0.756697539, 1.713403919), (-0.443263156, -0.077574317))
            Line((-0.443263156, -0.077574317), (0.077574317, -0.443263156))
            ThreePointArc((0.077574317, -0.443263156), (1.868552553, -0.129828772), (3.769237441, -0.443263156))
            Line((3.769237441, -0.443263156), (3.691663124, 0))
        make_face()
    chamfer5_piece_3 = extrude(amount=39.229157809, mode=Mode.PRIVATE)
    chamfer5_piece_3 = split(chamfer5_piece_3, bisect_by=Plane(origin=(-11.711520685, -3.211520685, 6.918404597), z_dir=(-0.7071067811865476, 0.7071067811865476, 0)), keep=Keep.TOP, mode=Mode.PRIVATE)
    chamfer5_piece_3 = split(chamfer5_piece_3, bisect_by=Plane(origin=(-6, 4.583653926, 6.918404597), z_dir=(-1, 0, 0)), keep=Keep.TOP, mode=Mode.PRIVATE)
    add(chamfer5_piece_3, mode=Mode.SUBTRACT)
    with BuildSketch(Plane(origin=(6.229157809, 5.5, 6), x_dir=(0, -0.9850292351397439, -0.17238737169529297), z_dir=(-1, 0, 0))) as chamfer5_piece_4_section:
        with BuildLine():
            Line((3.691663124, 0), (-1.253737533, 3.472249821))
            Line((-1.253737533, 3.472249821), (-1.697000689, 3.394675503))
            ThreePointArc((-1.697000689, 3.394675503), (-0.756697539, 1.713403919), (-0.443263156, -0.077574317))
            Line((-0.443263156, -0.077574317), (0.077574317, -0.443263156))
            ThreePointArc((0.077574317, -0.443263156), (1.868552553, -0.129828772), (3.769237441, -0.443263156))
            Line((3.769237441, -0.443263156), (3.691663124, 0))
        make_face()
    chamfer5_piece_4 = extrude(amount=48.458315618, mode=Mode.PRIVATE)
    chamfer5_piece_4 = split(chamfer5_piece_4, bisect_by=Plane(origin=(-33, 4.582402261, 6.917597739), z_dir=(-1, 0, 0)), keep=Keep.TOP, mode=Mode.PRIVATE)
    add(chamfer5_piece_4, mode=Mode.SUBTRACT)

    # Sketch9 → Cut-Extrude4 (cut, through all)
    with BuildSketch(Plane.XY.offset(109.6)):
        with Locations((87, -0.85)):
            Rectangle(SKETCH9_W, SKETCH9_H)
    extrude(amount=-CUT_EXTRUDE4_DEPTH, mode=Mode.SUBTRACT)

    # Sketch10 → Cut-Extrude5 (cut, through all)
    with BuildSketch(Plane(origin=(0, -14.8, 0), x_dir=(1, 0, 0), z_dir=(0, 1, 0))):
        Polygon((-13.320267735, 126.74467243), (187.662657728, 126.74467243), (187.662657728, 117.157752647), (203.07020738, 117.157752647), (203.07020738, -87.933852724), (190.401777666, -87.933852724), (190.401777666, -102.656622391), (-18.113727627, -102.656622391), (-18.113727627, -87.933852724), (-30.439767349, -87.933852724), (-30.439767349, 117.157752647), (-18.113727627, 117.157752647), (-18.113727627, 126.74467243), align=None)
    extrude(amount=-CUT_EXTRUDE5_DEPTH, mode=Mode.SUBTRACT)


solid = part_1.part
